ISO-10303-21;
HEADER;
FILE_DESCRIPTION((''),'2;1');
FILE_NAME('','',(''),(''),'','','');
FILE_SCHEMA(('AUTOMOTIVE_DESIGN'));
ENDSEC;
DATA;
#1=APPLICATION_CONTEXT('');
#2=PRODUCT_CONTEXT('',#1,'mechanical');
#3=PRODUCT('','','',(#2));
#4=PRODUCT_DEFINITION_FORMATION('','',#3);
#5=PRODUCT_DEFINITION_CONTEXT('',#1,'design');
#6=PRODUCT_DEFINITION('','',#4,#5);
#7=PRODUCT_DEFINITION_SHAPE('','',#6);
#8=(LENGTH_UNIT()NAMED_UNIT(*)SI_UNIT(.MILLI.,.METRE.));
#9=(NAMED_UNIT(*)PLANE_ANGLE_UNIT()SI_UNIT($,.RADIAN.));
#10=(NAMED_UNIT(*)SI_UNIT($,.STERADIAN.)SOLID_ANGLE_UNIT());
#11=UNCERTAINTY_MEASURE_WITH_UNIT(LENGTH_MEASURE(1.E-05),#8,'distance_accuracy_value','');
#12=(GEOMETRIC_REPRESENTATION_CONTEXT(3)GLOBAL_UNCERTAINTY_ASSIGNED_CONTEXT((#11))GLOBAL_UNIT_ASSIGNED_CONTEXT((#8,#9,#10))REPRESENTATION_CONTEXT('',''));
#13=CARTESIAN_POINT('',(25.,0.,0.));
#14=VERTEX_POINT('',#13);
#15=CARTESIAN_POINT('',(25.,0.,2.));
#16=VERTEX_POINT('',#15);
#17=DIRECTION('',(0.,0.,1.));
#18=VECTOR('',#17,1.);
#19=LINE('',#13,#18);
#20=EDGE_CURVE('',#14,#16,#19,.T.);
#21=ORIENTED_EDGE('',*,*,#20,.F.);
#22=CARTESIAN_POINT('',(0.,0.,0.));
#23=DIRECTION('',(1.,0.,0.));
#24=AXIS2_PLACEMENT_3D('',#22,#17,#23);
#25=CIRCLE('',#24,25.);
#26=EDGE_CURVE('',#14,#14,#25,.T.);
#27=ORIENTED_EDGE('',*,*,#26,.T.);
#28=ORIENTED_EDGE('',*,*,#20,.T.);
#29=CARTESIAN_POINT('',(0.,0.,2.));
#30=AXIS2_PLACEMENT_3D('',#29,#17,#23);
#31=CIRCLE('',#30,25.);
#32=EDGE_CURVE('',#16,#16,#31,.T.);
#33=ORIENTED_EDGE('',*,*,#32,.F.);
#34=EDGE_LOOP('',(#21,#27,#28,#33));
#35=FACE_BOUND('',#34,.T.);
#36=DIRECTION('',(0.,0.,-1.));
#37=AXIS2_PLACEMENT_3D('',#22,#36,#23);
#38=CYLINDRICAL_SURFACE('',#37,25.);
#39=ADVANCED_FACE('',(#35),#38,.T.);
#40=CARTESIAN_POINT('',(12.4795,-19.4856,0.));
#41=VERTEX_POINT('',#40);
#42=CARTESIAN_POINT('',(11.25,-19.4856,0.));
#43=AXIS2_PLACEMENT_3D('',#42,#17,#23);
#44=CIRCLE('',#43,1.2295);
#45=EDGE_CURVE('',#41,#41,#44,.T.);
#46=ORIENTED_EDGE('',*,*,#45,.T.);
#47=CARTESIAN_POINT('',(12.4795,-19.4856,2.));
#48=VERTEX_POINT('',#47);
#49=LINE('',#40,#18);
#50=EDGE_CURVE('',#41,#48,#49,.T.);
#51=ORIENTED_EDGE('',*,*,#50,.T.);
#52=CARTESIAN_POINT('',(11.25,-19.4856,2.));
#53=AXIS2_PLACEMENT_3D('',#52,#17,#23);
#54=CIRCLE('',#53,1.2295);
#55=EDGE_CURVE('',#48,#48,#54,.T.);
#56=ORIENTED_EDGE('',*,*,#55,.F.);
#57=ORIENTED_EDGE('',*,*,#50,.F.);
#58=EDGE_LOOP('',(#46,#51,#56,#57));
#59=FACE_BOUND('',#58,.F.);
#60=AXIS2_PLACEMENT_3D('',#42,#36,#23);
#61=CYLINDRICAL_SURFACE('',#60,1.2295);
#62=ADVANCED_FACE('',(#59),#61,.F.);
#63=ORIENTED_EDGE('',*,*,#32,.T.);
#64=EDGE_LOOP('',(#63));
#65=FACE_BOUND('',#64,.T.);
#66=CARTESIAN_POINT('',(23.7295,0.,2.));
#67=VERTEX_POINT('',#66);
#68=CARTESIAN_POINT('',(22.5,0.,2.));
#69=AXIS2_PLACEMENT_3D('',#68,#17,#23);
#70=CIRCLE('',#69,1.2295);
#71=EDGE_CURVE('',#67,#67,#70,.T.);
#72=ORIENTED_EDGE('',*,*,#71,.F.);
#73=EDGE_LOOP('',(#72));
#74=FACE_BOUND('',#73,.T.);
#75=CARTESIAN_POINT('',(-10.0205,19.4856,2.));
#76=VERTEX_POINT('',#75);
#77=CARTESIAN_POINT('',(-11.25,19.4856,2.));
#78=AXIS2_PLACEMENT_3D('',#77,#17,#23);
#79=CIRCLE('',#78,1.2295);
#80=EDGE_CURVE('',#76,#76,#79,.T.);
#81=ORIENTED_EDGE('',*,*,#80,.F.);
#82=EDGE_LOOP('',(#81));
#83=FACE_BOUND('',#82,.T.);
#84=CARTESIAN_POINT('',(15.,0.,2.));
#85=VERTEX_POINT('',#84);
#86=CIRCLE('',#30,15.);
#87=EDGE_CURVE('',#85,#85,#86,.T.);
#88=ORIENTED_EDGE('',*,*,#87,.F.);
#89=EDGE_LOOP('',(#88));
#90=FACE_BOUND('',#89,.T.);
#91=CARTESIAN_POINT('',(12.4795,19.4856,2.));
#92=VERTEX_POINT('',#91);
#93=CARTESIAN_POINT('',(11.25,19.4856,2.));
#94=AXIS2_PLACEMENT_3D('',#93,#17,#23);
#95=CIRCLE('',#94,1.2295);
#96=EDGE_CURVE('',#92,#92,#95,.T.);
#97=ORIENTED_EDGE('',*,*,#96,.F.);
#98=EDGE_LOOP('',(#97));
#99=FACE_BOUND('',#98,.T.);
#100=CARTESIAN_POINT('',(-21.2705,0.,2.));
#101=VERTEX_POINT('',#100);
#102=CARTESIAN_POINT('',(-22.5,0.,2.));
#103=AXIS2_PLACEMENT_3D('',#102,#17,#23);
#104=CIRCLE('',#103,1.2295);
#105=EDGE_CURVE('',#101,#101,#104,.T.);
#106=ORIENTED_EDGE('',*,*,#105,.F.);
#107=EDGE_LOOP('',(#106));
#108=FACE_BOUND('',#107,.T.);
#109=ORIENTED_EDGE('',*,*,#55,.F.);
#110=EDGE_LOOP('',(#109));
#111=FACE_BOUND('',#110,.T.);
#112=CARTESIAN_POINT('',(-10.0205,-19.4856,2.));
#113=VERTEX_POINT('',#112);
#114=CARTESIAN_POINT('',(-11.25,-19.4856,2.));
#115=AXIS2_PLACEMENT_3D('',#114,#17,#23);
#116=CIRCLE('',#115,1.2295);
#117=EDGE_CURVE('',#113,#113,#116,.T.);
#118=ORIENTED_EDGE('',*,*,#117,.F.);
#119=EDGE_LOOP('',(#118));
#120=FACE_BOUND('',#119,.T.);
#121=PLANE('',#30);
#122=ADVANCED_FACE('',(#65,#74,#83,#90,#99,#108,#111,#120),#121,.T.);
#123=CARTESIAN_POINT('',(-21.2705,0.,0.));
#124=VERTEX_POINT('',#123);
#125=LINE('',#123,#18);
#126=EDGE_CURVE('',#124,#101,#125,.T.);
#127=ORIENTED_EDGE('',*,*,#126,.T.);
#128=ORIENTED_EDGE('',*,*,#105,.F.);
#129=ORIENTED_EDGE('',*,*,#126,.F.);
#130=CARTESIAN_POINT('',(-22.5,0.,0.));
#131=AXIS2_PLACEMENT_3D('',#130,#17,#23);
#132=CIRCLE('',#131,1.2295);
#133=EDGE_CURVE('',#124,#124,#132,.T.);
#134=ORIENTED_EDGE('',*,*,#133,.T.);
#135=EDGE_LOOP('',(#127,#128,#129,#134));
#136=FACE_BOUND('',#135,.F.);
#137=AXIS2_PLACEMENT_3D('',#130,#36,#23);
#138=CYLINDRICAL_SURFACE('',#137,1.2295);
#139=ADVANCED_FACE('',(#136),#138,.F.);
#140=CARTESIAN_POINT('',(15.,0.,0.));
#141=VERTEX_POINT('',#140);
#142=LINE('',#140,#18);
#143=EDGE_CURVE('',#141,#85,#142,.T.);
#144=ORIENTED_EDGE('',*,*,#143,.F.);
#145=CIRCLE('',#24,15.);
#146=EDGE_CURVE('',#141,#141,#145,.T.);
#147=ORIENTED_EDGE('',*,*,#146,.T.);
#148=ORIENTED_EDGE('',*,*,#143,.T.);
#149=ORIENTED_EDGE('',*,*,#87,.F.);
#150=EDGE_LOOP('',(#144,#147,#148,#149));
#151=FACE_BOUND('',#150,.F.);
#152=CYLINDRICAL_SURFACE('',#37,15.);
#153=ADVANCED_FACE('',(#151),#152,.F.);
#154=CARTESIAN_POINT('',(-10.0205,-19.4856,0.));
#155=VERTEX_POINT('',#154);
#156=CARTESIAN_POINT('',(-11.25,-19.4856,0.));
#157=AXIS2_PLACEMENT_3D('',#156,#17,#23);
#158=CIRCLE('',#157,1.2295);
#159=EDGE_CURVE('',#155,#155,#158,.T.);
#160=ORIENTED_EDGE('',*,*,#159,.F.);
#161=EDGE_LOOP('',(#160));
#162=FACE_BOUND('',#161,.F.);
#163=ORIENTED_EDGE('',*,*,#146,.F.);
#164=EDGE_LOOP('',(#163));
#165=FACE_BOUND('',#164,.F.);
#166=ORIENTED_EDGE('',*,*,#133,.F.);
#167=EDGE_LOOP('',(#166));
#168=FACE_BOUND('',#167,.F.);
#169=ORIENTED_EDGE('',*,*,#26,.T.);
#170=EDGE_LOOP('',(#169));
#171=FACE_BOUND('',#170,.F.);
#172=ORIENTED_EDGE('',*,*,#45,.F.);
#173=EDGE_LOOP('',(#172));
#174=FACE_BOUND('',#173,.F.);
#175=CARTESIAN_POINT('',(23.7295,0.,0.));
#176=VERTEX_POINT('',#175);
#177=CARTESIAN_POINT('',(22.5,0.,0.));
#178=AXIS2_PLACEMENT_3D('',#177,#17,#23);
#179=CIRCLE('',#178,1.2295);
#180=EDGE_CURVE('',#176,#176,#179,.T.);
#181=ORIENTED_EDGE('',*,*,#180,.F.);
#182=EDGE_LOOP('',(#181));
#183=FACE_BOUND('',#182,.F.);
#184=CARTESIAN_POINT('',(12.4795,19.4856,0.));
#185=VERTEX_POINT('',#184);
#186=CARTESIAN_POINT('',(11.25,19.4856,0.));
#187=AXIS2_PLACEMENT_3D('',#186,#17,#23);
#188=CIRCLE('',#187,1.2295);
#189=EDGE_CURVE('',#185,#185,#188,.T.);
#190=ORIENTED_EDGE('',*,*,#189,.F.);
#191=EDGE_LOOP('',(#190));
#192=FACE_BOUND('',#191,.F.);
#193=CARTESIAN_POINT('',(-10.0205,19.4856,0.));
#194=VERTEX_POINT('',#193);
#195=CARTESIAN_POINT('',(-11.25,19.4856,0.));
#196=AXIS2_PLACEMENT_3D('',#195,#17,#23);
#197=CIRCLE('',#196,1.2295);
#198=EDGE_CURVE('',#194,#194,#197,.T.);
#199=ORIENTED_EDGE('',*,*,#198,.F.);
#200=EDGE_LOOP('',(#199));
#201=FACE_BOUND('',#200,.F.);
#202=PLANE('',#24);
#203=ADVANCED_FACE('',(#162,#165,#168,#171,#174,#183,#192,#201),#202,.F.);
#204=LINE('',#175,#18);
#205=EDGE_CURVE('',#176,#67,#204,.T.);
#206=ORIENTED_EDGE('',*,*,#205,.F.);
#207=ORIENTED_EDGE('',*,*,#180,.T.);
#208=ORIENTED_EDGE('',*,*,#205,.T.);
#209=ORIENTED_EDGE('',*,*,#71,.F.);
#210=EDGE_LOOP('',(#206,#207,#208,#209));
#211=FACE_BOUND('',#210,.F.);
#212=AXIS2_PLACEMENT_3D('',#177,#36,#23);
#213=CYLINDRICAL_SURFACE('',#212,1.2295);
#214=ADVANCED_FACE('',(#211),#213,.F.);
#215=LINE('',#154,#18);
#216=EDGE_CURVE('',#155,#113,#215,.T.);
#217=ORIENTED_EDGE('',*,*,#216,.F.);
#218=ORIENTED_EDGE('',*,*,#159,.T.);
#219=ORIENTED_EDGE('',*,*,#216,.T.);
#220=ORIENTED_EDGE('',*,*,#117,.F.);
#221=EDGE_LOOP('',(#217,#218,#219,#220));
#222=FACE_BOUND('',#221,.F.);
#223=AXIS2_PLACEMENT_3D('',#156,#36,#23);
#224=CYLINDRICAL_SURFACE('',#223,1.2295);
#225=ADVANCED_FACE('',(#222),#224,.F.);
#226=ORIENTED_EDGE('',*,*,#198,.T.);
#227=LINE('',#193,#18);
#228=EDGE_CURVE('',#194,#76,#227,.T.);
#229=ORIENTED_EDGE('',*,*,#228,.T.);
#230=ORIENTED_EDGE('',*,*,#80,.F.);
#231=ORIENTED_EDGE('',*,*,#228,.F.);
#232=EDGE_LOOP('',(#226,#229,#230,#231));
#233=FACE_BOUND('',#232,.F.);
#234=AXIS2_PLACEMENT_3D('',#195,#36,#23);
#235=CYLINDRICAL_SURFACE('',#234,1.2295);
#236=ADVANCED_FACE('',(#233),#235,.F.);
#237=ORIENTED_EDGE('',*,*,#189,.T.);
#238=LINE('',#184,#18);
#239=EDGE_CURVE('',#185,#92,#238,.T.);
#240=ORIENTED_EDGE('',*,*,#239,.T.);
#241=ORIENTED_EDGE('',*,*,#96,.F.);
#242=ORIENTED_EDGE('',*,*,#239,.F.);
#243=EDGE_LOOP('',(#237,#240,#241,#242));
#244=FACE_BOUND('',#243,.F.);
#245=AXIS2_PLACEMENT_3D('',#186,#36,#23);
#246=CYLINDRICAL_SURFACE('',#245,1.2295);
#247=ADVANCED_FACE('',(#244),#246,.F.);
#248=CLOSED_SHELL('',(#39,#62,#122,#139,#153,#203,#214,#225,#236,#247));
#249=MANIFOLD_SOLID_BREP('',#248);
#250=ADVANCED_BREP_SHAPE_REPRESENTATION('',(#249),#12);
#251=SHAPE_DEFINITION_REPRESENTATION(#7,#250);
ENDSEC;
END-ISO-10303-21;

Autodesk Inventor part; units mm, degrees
ref_plane "YZ Plane" through (0, 0, 0) normal (1, 0, 0) x (0, 1, 0)
ref_plane "XZ Plane" through (0, 0, 0) normal (0, 1, 0) x (-1, 0, 0)
ref_plane "XY Plane" through (0, 0, 0) normal (0, 0, 1) x (1, 0, 0)
sketch "Sketch2" plane through (0, 0, 0) normal (0, 0, 1) x (1, 0, 0)
  circle A0 centre (-22.5, 0) radius 1.2295 projected
  circle A1 centre (11.25, -19.4856) radius 1.2295 projected
  circle A2 centre (11.25, 19.4856) radius 1.2295 projected
  circle A3 centre (22.5, 0) radius 1.2295 projected
  circle A4 centre (-11.25, -19.4856) radius 1.2295 projected
  circle A5 centre (-11.25, 19.4856) radius 1.2295 projected
  circle A6 centre (0, 0) radius 25 projected
  circle A7 centre (0, 0) radius 16 projected
  circle A8 centre (0, 0) radius 15 projected
  point P0 (0, 0)
extrude "Extrusion1" add sketch "Sketch2" along normal blind 2 contours A6 | A7
properties part number "P019-Joint_chambre_chapeau" material "Polytetrafluoroethylene"
